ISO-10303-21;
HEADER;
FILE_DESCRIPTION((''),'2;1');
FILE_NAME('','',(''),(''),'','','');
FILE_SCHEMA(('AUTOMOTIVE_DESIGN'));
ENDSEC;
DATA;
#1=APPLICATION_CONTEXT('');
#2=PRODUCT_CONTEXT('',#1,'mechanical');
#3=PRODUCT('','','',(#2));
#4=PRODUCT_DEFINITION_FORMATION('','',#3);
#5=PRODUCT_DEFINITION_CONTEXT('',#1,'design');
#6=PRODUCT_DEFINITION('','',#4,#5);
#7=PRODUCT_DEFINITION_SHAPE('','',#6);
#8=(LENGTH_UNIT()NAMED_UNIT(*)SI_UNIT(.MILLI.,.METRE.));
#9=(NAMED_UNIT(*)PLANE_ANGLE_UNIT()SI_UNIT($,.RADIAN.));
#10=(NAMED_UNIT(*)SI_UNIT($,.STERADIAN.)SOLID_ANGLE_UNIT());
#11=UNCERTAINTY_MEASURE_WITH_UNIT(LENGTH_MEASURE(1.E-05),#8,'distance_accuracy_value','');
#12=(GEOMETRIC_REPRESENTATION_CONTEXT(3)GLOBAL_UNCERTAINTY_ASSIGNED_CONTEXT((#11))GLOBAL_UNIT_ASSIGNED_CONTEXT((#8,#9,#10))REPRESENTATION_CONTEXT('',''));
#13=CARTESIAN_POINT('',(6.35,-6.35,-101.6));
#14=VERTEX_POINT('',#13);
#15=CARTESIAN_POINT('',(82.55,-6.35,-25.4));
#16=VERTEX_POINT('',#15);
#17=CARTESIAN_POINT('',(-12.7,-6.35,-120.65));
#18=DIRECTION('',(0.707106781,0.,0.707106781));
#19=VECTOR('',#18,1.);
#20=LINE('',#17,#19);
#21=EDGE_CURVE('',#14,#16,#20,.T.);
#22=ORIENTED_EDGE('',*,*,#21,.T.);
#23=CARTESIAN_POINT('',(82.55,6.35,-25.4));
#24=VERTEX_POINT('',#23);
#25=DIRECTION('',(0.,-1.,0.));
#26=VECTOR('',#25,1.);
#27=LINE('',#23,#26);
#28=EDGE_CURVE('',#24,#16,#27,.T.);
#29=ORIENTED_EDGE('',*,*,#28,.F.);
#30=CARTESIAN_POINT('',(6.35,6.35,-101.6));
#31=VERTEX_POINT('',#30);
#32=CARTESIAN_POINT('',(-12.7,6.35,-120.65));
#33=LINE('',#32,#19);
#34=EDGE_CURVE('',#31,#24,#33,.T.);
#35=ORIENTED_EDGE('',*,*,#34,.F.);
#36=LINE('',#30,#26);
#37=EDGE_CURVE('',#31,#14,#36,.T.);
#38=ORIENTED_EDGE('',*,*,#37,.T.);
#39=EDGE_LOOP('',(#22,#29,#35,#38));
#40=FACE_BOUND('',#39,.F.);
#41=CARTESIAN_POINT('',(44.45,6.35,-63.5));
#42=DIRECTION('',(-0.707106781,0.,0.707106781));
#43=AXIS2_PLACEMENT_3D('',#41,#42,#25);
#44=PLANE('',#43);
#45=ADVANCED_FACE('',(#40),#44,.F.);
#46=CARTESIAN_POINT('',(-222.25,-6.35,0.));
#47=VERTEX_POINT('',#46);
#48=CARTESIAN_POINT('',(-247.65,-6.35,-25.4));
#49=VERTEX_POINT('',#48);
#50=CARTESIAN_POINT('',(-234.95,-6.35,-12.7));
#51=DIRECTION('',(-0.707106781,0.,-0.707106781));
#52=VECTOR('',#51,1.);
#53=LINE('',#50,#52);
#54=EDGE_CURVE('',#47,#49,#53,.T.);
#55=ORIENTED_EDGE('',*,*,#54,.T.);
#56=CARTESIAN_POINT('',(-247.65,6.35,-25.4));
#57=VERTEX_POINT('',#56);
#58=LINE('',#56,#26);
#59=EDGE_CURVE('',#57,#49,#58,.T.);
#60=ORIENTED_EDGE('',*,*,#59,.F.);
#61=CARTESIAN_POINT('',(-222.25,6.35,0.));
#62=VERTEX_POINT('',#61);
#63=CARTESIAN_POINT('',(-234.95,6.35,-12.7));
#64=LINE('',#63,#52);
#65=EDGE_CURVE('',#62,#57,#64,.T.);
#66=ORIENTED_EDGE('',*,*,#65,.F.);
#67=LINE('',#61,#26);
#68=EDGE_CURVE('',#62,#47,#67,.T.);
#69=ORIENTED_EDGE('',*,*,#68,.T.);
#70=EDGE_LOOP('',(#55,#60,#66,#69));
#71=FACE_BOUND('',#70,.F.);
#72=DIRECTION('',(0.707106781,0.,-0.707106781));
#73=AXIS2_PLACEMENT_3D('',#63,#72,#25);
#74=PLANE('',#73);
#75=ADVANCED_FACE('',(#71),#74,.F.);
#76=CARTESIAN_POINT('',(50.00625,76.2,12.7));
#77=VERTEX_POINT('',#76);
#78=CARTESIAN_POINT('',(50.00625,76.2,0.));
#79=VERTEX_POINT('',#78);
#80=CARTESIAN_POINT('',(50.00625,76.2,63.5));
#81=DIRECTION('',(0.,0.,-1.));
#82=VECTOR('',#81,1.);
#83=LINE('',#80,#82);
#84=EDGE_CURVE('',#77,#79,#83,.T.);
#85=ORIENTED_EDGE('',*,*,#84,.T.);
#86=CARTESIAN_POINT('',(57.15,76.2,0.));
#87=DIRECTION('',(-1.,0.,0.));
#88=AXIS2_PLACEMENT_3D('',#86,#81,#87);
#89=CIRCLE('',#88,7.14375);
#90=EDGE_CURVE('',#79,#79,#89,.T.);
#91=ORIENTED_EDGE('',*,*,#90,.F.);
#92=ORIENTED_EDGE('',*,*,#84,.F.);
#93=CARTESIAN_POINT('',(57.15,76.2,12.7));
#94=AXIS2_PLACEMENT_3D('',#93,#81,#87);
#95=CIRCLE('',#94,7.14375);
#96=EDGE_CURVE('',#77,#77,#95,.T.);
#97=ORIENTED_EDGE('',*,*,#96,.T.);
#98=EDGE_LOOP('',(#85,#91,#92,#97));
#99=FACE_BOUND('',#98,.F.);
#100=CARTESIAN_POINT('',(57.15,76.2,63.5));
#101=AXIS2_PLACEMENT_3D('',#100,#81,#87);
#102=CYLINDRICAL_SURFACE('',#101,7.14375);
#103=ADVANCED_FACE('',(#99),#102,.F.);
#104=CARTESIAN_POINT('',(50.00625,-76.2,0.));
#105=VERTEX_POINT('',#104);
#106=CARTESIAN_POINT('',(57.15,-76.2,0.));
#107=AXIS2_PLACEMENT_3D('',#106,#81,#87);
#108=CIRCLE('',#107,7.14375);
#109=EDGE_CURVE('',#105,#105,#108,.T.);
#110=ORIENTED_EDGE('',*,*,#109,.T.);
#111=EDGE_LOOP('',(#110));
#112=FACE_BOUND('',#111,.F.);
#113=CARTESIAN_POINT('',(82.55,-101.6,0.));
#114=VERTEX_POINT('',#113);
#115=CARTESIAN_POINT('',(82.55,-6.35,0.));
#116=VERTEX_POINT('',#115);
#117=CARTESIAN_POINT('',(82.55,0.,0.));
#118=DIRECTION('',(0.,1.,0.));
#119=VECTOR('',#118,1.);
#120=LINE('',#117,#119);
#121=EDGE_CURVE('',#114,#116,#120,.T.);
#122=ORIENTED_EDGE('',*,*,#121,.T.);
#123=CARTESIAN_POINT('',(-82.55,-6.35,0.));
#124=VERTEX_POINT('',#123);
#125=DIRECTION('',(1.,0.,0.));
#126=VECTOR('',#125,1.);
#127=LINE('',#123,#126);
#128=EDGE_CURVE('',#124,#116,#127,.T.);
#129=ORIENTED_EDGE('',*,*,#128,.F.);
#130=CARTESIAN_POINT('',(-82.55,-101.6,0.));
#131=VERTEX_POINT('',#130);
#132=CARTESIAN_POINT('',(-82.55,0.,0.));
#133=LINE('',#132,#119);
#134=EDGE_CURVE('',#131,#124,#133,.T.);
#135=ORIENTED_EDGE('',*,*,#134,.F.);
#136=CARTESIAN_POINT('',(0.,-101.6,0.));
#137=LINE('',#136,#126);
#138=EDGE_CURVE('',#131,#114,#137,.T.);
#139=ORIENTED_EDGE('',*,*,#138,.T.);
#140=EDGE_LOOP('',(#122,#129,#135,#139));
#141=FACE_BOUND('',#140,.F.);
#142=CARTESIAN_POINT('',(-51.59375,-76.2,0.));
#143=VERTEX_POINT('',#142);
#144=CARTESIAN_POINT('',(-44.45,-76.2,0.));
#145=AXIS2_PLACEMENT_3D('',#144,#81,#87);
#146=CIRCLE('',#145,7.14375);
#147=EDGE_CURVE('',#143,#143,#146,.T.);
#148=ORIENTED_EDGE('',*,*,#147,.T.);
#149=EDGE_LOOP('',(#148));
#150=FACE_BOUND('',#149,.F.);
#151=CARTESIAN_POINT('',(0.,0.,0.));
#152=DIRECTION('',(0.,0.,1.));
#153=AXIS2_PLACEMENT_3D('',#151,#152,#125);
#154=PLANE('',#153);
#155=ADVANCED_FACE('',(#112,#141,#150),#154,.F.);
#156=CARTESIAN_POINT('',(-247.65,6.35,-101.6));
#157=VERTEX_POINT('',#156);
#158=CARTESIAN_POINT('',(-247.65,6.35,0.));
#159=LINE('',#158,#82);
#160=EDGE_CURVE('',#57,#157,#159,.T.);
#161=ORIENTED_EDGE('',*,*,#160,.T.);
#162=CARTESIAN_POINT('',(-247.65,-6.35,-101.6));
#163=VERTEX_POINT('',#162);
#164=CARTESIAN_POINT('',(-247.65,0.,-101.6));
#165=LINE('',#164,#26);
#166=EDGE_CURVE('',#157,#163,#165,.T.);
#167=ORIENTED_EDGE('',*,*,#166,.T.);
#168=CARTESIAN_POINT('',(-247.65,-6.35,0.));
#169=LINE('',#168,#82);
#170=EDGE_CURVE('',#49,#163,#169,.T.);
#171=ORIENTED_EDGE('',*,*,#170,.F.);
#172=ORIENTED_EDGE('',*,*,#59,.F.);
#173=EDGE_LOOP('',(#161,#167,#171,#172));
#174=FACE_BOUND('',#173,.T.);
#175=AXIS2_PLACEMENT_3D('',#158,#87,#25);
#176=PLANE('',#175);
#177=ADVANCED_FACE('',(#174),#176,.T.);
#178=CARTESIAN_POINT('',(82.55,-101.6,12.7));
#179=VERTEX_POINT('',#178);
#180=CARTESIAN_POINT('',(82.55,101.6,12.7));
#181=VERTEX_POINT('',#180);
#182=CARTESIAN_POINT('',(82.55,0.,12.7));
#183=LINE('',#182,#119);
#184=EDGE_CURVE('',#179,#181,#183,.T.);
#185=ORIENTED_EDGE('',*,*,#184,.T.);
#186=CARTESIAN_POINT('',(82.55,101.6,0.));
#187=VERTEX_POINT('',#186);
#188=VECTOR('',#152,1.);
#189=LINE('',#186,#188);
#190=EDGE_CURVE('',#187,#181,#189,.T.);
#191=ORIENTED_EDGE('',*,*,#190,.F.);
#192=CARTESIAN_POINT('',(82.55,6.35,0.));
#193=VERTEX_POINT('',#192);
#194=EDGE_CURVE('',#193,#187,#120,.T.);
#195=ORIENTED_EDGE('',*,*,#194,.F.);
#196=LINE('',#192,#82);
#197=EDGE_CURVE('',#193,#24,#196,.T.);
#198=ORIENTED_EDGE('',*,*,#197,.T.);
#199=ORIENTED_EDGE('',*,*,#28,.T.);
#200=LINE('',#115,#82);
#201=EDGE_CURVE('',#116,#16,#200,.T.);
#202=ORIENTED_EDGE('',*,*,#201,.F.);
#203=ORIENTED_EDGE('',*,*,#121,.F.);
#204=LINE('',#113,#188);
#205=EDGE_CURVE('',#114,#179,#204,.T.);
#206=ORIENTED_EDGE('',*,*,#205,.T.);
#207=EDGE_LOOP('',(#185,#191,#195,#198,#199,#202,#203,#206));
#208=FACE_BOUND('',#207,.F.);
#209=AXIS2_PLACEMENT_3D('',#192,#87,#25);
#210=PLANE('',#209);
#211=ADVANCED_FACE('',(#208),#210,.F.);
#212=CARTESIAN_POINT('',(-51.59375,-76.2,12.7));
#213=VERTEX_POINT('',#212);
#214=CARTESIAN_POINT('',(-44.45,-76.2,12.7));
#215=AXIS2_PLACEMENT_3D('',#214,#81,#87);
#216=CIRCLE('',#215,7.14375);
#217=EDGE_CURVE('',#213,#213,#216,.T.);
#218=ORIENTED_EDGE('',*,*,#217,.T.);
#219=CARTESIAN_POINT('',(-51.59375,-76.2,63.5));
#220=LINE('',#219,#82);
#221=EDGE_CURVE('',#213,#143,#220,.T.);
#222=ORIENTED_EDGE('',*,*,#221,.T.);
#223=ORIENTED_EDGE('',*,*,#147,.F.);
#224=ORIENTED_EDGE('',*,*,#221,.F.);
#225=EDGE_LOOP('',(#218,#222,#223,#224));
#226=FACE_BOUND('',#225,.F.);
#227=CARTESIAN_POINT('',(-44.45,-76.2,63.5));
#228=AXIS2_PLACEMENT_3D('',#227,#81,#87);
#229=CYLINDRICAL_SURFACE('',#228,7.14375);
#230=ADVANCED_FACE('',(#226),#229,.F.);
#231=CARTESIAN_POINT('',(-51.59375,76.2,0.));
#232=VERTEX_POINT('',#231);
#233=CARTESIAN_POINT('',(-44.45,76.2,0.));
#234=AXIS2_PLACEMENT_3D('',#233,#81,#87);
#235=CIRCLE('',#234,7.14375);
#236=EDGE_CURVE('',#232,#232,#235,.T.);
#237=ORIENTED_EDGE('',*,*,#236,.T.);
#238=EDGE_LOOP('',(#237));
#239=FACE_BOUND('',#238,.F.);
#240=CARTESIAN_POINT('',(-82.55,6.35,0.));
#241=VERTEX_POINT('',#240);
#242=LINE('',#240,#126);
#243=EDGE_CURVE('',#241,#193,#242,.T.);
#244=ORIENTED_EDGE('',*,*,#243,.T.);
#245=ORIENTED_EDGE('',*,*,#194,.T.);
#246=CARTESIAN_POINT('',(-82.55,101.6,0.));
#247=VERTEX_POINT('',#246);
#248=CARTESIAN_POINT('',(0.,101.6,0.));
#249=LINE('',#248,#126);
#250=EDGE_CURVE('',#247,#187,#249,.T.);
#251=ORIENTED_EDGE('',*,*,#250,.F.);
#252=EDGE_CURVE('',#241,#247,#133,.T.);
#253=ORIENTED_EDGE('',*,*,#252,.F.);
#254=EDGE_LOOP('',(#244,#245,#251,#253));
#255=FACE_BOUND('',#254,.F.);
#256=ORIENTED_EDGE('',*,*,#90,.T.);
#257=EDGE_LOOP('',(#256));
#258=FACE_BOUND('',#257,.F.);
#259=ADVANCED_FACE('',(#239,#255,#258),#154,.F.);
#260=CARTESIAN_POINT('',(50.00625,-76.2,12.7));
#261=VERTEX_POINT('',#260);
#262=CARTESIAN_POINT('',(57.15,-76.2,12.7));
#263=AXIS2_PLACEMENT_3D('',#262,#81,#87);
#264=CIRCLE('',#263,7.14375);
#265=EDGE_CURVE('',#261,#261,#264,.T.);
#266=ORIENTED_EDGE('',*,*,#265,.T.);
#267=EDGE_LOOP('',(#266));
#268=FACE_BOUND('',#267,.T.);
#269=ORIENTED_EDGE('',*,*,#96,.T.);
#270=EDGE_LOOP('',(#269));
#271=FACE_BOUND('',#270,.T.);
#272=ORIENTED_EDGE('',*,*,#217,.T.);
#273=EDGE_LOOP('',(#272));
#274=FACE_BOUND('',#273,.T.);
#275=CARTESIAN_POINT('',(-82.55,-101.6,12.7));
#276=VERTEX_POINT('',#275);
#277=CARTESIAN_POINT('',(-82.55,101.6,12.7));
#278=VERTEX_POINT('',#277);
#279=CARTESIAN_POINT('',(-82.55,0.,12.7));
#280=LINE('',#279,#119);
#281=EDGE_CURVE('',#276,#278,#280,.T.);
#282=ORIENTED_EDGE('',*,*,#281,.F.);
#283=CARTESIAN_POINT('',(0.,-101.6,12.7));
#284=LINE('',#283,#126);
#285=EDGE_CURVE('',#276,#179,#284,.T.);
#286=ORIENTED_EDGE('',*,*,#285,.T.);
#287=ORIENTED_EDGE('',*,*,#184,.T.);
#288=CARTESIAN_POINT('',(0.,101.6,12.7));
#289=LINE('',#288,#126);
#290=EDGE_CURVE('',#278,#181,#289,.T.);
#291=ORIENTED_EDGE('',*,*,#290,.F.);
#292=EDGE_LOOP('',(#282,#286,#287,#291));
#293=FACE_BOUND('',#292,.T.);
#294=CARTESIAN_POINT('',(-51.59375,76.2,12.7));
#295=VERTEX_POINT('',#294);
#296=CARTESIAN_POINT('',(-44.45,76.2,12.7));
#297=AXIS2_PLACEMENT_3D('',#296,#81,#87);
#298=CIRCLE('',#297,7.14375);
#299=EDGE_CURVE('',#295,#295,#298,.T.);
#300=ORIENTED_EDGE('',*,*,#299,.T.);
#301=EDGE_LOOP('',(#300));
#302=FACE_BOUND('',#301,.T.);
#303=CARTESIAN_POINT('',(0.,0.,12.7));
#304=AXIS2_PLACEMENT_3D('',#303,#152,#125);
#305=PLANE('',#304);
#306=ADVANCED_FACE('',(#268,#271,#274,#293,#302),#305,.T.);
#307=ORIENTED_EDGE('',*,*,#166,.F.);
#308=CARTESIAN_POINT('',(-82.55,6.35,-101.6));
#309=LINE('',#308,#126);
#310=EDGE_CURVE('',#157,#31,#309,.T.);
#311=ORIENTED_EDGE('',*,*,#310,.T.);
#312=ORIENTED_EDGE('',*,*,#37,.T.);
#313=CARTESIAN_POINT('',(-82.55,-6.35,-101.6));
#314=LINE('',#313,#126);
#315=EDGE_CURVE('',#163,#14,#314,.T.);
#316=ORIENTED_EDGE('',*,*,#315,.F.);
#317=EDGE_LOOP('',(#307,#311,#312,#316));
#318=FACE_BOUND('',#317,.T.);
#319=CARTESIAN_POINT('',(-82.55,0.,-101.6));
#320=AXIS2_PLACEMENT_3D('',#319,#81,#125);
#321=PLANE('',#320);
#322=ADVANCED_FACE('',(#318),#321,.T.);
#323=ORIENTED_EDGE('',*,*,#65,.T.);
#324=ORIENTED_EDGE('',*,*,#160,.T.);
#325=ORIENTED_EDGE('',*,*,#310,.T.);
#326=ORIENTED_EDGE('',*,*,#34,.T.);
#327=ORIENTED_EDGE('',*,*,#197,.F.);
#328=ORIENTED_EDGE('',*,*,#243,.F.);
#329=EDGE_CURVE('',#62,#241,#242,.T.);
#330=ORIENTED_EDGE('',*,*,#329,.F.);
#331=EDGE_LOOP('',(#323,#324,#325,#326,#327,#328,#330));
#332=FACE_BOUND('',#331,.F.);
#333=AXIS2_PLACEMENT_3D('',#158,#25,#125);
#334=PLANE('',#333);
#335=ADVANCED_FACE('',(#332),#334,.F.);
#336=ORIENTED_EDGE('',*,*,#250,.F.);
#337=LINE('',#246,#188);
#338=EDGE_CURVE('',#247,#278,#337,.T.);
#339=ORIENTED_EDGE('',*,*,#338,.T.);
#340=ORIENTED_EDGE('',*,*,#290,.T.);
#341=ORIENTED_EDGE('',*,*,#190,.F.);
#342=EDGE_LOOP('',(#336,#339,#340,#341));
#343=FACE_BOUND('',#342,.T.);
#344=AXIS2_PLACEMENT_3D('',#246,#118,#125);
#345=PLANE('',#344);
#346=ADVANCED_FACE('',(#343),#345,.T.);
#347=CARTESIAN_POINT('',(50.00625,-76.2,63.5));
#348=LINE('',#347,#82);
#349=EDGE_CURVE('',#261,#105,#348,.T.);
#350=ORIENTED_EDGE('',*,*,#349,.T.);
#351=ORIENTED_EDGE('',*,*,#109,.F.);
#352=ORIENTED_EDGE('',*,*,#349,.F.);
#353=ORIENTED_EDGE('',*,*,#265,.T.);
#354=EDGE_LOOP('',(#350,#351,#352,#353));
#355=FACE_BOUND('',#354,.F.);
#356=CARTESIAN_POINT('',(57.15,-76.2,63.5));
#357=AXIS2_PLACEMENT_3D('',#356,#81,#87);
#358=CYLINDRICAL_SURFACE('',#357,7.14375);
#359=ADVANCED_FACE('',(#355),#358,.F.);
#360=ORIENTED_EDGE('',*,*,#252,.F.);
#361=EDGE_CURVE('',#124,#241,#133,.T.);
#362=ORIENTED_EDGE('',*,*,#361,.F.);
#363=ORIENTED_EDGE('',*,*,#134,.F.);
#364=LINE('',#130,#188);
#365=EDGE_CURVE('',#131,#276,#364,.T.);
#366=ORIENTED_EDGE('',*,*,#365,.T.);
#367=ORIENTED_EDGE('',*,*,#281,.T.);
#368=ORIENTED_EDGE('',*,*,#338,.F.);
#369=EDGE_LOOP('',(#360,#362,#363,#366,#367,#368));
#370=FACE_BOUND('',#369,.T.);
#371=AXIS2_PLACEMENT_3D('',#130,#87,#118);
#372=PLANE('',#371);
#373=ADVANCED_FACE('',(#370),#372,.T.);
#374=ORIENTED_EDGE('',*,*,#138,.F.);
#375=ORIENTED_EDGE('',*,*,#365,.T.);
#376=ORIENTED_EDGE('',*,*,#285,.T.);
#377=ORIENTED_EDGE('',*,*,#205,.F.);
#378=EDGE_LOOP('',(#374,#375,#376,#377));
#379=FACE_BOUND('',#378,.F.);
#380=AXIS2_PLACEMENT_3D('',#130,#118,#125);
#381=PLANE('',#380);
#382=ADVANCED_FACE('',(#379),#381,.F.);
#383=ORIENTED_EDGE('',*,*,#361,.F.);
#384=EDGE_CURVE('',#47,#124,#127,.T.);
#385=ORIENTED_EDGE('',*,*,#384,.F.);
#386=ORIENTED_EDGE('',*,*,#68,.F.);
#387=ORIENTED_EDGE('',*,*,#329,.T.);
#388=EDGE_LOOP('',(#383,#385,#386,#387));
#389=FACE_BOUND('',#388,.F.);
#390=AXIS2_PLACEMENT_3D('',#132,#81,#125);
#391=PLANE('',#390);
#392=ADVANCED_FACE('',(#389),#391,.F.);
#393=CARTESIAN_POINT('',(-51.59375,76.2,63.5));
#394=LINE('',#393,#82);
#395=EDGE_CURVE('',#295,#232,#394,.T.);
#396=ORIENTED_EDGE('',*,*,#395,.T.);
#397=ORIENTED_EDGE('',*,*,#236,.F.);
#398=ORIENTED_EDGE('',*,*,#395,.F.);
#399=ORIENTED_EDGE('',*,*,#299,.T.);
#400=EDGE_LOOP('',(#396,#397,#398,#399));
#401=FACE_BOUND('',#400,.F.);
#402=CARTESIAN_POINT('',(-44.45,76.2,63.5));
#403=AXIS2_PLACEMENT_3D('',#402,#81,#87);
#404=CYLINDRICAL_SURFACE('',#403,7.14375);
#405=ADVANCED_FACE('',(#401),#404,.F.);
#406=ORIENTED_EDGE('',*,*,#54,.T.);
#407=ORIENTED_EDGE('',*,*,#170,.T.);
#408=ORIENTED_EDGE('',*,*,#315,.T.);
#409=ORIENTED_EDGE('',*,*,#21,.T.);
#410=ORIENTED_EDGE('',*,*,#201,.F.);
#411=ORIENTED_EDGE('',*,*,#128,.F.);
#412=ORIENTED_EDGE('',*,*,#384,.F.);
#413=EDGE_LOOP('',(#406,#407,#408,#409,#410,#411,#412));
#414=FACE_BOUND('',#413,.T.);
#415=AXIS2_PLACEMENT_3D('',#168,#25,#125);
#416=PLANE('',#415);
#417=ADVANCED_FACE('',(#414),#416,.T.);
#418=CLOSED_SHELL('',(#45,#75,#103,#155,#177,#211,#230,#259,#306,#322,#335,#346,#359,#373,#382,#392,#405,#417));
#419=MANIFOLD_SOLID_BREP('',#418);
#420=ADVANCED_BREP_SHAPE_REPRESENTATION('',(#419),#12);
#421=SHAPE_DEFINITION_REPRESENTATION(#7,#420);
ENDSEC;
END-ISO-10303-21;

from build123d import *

# Parameters (mm, degrees)
F0_W     = 165.1
F0_H     = 203.2
F1_DEPTH = 12.7
F3_D     = 14.2875
F3_DEPTH = 50.8
F3_TIP   = 4.2923980472
F4_W     = 330.2
F4_H     = 12.7
F5_DEPTH = 101.6
F6_SIZE  = 76.2
F7_SIZE  = 25.4


# Not quite as in the source:
# - a length typed as a fraction of an inch, garbled in the dataset ("3 / 203.2 mm" for 3/8 in), is restored


with BuildPart() as f1:
    # F0 (on Top) → F1 (new body)
    with BuildSketch(Plane.XY):
        Rectangle(F0_W, F0_H)
    extrude(amount=F1_DEPTH)

    # F3
    with Locations(Plane.XY.offset(12.7)):
        with Locations((-44.45, 76.2), (57.15, 76.2), (-44.45, -76.2), (57.15, -76.2)):
            Hole(F3_D / 2, depth=F3_DEPTH)
            with Locations((0, 0, -(F3_DEPTH + F3_TIP / 2))):  # 118° drill point
                Cone(0, F3_D / 2, F3_TIP, mode=Mode.SUBTRACT)

    # F4 (on face) → F5 (join)
    with BuildSketch(Plane(origin=(0, 0, 0), x_dir=(1, 0, 0), z_dir=(0, 0, -1))):
        with Locations((-82.55, 0)):
            Rectangle(F4_W, F4_H)
    extrude(amount=F5_DEPTH)

    # F6
    f6_edges = [f1.edges().sort_by_distance(p)[0] for p in [
        (82.55, 0, -101.6),
    ]]
    chamfer(f6_edges, length=F6_SIZE)

    # F7
    f7_edges = [f1.edges().sort_by_distance(p)[0] for p in [
        (-247.65, 0, 0),
    ]]
    chamfer(f7_edges, length=F7_SIZE)


solid = f1.part
